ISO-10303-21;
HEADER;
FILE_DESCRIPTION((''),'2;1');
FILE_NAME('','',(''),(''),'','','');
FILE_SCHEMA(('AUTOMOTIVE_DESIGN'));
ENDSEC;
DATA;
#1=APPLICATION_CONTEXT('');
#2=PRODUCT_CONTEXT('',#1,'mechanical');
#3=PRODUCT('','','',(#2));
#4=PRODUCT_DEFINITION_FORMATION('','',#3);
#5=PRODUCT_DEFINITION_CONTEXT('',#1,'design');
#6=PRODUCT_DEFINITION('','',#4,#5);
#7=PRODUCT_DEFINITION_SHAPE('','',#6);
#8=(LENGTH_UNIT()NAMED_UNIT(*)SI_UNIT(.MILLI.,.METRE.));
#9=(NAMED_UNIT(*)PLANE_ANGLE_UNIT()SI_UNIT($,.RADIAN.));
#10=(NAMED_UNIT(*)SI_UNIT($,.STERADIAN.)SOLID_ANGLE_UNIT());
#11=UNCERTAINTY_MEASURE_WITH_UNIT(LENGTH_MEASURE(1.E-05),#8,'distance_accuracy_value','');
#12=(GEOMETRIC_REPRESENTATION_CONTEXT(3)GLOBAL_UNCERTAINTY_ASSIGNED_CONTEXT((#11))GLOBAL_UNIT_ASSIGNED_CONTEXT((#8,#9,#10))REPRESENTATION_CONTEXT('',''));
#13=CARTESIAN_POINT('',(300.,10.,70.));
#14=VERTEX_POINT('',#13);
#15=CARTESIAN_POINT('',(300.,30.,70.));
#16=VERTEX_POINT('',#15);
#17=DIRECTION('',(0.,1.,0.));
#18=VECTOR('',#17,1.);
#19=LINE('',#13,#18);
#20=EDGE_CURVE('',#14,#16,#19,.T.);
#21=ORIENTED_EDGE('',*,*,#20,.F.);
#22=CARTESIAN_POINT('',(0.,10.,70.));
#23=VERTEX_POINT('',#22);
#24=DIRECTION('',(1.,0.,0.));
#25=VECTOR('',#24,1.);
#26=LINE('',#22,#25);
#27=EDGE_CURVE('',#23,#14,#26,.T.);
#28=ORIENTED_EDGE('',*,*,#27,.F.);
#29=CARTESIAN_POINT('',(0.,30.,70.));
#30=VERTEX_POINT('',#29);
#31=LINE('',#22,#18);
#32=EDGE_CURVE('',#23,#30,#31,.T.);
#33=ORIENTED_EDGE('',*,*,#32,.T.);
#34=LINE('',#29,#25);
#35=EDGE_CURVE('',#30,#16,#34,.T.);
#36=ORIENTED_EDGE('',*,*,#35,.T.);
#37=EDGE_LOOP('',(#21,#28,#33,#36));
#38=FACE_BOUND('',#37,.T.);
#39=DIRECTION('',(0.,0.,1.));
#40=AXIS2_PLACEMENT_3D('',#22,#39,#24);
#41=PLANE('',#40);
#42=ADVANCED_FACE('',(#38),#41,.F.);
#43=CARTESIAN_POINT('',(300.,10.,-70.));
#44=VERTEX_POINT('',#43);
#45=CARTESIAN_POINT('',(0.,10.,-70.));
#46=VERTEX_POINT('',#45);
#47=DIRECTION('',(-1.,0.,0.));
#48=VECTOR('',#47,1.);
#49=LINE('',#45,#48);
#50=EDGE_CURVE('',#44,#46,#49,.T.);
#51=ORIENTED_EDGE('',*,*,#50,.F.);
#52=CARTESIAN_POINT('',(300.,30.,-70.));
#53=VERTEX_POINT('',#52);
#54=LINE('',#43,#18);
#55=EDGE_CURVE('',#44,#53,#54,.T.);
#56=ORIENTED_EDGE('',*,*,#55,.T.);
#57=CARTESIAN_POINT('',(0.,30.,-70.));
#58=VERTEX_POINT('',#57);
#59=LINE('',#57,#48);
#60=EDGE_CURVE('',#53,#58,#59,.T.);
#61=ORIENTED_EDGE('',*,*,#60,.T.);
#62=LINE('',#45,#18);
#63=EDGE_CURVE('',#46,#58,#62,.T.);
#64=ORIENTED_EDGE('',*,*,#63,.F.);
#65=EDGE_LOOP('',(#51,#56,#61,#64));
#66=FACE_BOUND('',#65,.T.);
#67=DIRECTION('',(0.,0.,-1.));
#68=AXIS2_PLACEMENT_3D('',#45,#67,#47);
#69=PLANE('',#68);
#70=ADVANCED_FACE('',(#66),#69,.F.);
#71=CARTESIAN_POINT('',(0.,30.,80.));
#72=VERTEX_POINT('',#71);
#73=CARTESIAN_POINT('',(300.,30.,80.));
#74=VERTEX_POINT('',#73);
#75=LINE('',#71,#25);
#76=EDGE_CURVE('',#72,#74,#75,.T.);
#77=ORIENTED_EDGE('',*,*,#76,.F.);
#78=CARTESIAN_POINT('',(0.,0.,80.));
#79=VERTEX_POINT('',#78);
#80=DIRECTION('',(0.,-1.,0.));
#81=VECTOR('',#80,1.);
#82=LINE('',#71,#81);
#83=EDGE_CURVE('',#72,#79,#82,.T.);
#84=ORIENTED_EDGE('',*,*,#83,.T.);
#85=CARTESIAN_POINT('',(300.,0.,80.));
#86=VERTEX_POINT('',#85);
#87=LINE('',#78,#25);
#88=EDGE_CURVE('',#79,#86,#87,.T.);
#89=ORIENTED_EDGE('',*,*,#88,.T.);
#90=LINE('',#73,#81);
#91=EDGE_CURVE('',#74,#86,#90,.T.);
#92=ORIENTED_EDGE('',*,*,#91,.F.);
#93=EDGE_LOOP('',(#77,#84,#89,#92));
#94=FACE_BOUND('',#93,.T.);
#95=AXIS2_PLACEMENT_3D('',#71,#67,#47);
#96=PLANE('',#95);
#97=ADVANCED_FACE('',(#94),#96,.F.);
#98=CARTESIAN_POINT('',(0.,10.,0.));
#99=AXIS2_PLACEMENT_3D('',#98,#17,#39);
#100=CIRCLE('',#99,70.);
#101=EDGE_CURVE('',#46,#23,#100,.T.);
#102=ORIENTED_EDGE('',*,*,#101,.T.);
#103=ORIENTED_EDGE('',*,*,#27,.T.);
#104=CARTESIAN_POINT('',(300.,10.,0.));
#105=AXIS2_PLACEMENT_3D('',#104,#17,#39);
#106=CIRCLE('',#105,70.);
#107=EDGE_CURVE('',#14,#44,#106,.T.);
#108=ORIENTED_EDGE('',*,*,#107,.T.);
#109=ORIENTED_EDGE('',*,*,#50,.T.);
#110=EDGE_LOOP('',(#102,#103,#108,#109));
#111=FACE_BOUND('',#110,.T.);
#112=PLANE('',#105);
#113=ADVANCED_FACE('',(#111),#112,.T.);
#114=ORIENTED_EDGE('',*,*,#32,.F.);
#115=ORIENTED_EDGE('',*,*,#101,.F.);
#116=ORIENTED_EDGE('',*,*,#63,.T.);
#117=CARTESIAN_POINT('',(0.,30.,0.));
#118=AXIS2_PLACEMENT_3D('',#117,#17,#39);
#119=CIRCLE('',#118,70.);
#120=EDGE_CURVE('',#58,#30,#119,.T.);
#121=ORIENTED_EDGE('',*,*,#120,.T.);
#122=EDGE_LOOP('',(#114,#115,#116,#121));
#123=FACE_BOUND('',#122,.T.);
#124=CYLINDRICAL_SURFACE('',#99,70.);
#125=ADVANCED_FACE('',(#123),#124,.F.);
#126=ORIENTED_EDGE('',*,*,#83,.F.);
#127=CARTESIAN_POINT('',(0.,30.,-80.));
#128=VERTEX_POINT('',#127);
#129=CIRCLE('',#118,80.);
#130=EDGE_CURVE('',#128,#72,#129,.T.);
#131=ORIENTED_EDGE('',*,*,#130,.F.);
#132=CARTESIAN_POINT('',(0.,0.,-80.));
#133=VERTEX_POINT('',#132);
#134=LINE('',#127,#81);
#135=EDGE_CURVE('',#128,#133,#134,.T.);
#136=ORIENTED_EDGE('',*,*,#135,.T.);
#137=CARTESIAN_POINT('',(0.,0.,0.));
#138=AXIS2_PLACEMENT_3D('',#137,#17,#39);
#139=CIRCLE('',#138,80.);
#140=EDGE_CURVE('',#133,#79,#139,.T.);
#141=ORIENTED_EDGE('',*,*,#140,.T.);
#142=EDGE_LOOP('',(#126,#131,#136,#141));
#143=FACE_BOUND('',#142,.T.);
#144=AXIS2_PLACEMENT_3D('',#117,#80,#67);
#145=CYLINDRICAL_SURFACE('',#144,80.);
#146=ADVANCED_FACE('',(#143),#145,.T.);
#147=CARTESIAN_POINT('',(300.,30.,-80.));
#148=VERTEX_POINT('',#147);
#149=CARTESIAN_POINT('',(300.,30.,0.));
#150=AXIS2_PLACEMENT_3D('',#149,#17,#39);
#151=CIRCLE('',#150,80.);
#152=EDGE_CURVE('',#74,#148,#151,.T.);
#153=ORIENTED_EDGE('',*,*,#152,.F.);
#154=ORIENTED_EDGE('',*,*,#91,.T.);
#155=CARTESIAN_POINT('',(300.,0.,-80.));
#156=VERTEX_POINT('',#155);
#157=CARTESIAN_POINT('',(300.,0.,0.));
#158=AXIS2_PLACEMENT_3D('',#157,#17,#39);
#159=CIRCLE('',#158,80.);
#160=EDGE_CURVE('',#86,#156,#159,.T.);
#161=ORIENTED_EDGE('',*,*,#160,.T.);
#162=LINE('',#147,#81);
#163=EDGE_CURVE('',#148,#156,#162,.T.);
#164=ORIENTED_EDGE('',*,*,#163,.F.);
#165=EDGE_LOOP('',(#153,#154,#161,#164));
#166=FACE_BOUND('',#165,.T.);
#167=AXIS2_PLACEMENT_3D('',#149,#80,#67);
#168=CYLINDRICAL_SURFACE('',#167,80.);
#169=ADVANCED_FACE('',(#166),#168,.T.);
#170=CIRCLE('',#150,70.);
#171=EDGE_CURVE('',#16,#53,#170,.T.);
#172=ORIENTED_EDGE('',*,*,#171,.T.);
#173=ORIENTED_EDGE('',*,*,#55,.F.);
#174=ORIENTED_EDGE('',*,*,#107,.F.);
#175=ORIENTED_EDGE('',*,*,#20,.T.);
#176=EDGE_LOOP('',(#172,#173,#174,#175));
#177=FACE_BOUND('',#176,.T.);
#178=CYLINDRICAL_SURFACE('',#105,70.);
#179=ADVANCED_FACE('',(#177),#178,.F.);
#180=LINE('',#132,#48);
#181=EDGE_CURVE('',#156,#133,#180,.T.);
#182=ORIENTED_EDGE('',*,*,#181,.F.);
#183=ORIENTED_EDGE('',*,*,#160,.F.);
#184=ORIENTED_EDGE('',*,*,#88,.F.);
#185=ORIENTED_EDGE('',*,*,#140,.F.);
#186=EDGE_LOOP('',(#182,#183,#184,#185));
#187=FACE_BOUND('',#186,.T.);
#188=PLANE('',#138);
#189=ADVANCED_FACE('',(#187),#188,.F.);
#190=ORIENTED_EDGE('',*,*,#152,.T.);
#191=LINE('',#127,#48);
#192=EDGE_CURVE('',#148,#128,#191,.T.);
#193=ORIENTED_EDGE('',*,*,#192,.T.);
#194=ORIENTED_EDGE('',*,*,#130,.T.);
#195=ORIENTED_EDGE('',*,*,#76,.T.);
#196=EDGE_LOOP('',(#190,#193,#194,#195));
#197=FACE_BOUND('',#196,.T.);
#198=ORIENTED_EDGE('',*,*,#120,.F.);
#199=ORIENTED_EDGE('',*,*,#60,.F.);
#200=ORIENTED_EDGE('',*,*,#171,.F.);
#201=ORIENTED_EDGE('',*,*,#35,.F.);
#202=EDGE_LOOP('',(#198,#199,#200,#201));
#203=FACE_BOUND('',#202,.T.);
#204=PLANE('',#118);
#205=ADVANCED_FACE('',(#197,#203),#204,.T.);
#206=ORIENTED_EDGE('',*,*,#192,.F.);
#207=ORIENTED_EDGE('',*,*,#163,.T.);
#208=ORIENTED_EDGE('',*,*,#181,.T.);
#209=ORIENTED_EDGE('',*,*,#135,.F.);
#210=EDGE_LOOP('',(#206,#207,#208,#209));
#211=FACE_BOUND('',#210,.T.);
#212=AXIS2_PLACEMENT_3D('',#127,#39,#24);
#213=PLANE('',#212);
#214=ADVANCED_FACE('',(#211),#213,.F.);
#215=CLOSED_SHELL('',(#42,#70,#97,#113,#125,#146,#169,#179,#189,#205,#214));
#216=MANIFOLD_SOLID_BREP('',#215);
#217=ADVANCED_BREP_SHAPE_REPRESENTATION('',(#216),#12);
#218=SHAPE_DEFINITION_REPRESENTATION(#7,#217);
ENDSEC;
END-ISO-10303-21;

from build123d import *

# Parameters (mm, degrees)
BOSS_EXTRUDE1_DEPTH = 30
BOSS_EXTRUDE2_START = -20
BOSS_EXTRUDE2_DEPTH = 20


# Read off the part's stored shape, not the designer's step: Boss-Extrude2
with BuildPart() as part:
    # Sketch1 → Boss-Extrude1 (new body)
    with BuildSketch(Plane(origin=(0, 0, 0), x_dir=(1, 0, 0), z_dir=(0, 1, 0))):
        with BuildLine():
            Line((0, 80), (300, 80))
            ThreePointArc((300, 80), (380, 0), (300, -80))
            Line((300, -80), (0, -80))
            ThreePointArc((0, -80), (-80, 0), (0, 80))
        make_face()
    extrude(amount=BOSS_EXTRUDE1_DEPTH)

    # Boss-Extrude2 outline → Boss-Extrude2 (cut)
    with BuildSketch(Plane(origin=(0, 30, 0), x_dir=(1, 0, 0), z_dir=(0, 1, 0)).offset(BOSS_EXTRUDE2_START)):
        with BuildLine():
            Line((0, -70), (300, -70))
            ThreePointArc((300, -70), (370, 0), (300, 70))
            Line((300, 70), (0, 70))
            ThreePointArc((0, 70), (-70, 0), (0, -70))
        make_face()
    extrude(amount=BOSS_EXTRUDE2_DEPTH, mode=Mode.SUBTRACT)


solid = part.part
